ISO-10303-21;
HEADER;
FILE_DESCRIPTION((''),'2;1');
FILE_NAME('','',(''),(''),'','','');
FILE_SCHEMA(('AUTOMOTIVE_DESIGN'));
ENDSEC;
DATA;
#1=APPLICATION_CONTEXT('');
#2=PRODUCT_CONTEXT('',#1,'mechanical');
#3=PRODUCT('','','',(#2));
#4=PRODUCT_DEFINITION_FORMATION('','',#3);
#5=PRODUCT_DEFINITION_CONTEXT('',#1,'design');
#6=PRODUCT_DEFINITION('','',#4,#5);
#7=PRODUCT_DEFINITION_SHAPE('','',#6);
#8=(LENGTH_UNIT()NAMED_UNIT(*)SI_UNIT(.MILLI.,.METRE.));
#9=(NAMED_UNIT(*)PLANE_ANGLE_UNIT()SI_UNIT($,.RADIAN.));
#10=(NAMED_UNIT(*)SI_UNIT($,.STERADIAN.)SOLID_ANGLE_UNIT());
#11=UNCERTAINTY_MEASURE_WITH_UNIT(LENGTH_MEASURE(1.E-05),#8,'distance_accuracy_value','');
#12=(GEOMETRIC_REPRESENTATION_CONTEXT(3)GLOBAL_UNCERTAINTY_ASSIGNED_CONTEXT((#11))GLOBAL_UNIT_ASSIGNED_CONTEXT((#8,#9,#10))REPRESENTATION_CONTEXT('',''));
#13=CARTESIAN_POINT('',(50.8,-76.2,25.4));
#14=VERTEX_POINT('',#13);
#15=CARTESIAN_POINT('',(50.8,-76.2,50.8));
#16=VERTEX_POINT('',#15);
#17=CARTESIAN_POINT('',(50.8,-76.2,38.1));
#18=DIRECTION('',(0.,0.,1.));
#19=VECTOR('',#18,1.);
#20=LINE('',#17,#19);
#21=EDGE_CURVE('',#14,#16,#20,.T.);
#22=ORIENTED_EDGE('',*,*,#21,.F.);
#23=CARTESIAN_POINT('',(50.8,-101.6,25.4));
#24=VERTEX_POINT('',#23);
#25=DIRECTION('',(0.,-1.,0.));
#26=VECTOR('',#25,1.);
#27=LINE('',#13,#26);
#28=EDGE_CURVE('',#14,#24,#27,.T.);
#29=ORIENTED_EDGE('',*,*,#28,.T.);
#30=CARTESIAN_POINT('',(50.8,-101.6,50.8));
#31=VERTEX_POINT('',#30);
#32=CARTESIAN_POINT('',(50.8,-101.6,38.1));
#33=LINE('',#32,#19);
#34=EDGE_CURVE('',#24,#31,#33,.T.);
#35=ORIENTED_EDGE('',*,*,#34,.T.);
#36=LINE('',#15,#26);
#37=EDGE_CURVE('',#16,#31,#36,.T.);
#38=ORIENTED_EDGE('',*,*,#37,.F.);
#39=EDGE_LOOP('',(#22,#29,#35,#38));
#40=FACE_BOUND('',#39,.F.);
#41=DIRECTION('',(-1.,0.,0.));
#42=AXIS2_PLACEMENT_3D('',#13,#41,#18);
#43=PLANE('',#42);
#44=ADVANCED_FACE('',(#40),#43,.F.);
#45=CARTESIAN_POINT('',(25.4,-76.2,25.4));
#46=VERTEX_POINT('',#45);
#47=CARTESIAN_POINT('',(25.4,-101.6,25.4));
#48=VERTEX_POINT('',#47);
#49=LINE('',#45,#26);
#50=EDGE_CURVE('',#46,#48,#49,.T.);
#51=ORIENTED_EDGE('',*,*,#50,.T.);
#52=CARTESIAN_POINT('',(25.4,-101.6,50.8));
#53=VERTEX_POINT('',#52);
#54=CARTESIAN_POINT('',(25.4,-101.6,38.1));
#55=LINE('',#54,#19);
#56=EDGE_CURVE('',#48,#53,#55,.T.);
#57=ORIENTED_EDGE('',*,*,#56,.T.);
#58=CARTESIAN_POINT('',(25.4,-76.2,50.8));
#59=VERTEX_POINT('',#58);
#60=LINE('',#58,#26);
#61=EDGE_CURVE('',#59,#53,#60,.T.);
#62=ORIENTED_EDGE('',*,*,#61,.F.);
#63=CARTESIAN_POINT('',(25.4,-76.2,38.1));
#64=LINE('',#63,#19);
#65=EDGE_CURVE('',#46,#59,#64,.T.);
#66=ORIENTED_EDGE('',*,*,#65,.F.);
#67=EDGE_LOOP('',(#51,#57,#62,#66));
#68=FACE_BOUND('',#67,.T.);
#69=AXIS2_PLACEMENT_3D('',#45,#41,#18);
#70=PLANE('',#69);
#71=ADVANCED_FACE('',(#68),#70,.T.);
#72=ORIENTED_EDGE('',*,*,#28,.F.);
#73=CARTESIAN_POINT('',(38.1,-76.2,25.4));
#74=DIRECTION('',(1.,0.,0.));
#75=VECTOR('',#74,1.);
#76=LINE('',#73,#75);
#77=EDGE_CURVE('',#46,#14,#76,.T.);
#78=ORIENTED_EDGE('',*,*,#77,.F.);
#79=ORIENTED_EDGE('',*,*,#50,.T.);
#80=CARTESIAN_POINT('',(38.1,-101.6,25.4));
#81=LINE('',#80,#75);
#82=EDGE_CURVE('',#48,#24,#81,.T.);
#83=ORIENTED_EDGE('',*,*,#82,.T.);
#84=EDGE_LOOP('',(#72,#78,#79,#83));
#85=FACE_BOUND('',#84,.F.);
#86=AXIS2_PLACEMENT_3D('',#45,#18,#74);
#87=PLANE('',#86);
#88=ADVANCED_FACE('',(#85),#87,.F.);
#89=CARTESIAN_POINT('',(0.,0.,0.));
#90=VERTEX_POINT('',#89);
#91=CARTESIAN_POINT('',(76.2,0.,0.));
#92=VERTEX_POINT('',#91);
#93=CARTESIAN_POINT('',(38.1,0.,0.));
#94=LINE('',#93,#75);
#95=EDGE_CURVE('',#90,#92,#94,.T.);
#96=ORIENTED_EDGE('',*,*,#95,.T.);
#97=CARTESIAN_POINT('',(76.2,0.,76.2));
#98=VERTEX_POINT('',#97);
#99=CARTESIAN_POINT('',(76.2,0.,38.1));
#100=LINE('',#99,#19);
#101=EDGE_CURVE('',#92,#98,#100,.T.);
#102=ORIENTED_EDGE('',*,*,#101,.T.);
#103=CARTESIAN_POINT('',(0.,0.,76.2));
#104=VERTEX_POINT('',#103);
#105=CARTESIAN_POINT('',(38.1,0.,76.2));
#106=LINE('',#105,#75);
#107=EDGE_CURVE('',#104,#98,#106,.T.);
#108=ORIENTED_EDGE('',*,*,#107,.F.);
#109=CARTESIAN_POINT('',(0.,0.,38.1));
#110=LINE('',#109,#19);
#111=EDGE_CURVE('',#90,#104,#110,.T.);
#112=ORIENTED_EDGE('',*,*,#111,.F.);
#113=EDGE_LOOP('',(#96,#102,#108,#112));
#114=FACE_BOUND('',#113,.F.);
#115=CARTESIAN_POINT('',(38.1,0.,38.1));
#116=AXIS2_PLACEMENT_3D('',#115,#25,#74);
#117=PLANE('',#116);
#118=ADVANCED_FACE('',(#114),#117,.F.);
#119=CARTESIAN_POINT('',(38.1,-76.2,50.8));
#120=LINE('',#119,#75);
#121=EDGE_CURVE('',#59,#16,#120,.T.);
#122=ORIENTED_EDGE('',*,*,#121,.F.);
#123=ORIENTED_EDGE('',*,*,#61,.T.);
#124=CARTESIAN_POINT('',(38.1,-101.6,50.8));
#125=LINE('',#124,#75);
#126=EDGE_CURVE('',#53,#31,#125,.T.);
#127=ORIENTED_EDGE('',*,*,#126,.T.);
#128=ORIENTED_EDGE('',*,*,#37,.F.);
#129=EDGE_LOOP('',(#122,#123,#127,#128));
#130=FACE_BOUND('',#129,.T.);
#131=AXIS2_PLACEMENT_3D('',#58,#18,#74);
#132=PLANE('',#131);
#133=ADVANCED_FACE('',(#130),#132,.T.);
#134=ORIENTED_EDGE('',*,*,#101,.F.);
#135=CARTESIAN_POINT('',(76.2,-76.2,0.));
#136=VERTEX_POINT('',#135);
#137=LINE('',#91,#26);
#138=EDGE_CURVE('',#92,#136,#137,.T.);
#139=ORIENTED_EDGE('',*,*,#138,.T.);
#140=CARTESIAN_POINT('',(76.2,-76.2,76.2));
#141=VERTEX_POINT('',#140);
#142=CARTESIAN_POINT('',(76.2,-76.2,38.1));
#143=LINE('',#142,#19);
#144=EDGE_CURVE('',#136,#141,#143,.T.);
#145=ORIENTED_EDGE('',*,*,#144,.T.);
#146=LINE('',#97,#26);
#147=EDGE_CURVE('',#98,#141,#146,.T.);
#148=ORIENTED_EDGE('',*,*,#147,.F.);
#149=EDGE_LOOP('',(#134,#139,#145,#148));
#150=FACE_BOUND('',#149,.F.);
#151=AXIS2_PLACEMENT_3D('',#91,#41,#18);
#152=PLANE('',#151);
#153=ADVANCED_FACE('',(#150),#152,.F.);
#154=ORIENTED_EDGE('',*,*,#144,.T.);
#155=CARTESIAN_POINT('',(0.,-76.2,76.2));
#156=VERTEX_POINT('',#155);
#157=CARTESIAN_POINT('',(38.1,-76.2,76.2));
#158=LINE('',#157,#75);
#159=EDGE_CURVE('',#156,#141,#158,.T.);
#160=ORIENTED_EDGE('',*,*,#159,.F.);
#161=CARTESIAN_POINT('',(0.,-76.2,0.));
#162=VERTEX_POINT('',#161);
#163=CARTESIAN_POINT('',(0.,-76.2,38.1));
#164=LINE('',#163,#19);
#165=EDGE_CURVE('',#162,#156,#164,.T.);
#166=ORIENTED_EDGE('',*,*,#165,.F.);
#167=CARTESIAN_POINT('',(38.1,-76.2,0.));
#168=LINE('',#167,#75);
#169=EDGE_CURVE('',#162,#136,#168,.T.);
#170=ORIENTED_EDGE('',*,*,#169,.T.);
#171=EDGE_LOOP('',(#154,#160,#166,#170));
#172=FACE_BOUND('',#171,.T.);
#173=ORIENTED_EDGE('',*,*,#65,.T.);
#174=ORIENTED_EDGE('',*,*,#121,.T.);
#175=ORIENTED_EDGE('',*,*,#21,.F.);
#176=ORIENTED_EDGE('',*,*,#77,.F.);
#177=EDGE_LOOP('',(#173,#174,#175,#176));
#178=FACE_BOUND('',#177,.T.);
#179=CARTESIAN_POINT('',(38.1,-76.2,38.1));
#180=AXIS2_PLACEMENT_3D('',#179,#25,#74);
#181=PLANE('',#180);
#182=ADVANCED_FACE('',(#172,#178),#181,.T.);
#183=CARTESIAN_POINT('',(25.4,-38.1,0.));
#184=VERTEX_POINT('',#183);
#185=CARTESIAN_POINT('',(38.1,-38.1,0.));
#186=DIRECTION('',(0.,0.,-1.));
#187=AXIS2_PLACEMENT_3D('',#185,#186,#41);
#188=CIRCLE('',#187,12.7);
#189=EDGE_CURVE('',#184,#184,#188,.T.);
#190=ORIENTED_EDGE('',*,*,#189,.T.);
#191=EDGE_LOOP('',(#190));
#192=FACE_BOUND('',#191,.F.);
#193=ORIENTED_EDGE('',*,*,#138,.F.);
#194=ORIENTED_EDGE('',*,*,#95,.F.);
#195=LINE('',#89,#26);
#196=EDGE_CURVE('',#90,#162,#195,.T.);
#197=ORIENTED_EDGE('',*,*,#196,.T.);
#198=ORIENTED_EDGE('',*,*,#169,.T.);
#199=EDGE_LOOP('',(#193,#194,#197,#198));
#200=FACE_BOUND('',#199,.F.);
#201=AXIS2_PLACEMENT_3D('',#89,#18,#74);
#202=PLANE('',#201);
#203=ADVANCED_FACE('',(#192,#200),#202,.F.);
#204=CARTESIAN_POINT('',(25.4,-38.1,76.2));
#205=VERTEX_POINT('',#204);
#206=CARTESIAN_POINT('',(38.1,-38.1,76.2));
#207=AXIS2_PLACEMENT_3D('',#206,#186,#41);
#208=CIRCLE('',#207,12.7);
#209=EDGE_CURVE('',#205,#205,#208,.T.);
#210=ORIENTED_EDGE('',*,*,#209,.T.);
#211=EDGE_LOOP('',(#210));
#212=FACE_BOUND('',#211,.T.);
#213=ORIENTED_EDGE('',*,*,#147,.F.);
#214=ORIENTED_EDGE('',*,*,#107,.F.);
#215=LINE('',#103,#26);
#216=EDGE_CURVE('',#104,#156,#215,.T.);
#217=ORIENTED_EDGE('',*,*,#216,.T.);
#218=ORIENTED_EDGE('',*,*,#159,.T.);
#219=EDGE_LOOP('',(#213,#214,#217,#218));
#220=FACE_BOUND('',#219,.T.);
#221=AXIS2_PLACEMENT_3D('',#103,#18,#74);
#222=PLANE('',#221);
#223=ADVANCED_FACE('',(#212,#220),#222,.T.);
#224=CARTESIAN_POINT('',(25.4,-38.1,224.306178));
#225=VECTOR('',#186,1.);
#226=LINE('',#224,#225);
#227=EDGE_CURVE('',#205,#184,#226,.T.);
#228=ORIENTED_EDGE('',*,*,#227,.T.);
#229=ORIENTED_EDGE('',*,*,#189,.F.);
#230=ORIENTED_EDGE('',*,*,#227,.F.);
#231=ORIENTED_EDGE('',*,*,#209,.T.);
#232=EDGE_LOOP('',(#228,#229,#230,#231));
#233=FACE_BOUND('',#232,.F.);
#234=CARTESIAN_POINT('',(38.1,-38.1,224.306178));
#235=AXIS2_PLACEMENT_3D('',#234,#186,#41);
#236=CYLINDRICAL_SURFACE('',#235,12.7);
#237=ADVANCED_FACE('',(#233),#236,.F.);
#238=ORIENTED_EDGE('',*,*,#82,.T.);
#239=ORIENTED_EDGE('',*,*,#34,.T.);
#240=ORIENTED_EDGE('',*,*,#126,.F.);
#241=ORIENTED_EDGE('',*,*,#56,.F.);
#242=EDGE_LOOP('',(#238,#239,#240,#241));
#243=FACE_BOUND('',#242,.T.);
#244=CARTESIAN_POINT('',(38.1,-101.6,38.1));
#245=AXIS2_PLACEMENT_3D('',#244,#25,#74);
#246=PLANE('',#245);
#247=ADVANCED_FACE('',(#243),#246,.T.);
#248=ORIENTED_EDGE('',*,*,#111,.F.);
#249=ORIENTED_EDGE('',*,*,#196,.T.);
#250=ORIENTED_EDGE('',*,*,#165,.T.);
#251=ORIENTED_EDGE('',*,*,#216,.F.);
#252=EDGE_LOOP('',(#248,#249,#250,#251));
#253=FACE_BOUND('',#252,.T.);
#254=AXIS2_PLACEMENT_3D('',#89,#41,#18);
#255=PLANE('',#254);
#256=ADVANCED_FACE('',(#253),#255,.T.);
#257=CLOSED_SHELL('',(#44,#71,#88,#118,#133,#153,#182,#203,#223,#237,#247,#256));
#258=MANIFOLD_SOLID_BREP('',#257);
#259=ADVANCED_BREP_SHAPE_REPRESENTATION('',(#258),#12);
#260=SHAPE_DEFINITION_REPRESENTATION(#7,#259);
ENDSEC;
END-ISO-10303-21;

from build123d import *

# Parameters (mm, degrees)
F0_W     = 76.2
F0_H     = 76.2
F1_DEPTH = 76.2
F2_W     = 25.4
F2_H     = 25.4
F3_DEPTH = 25.4
F5_D     = 25.4


# Not quite as in the source:
# - the program builds the solid bodies; features that only make, move or delete a surface that nothing else refers to are left out


with BuildPart() as f1:
    # F0 (on Front) → F1 (new body)
    with BuildSketch(Plane.XZ):
        with Locations((38.1, 38.1)):
            Rectangle(F0_W, F0_H)
    extrude(amount=F1_DEPTH)

    # F2 (on face) → F3 (join)
    with BuildSketch(Plane.XZ.offset(76.2)):
        with Locations((38.1, 38.1)):
            Rectangle(F2_W, F2_H)
    extrude(amount=F3_DEPTH)

    # F5 (through all)
    with Locations(Plane.XY.offset(76.2)):
        with Locations((38.1, -38.1)):
            Hole(F5_D / 2)


solid = f1.part
